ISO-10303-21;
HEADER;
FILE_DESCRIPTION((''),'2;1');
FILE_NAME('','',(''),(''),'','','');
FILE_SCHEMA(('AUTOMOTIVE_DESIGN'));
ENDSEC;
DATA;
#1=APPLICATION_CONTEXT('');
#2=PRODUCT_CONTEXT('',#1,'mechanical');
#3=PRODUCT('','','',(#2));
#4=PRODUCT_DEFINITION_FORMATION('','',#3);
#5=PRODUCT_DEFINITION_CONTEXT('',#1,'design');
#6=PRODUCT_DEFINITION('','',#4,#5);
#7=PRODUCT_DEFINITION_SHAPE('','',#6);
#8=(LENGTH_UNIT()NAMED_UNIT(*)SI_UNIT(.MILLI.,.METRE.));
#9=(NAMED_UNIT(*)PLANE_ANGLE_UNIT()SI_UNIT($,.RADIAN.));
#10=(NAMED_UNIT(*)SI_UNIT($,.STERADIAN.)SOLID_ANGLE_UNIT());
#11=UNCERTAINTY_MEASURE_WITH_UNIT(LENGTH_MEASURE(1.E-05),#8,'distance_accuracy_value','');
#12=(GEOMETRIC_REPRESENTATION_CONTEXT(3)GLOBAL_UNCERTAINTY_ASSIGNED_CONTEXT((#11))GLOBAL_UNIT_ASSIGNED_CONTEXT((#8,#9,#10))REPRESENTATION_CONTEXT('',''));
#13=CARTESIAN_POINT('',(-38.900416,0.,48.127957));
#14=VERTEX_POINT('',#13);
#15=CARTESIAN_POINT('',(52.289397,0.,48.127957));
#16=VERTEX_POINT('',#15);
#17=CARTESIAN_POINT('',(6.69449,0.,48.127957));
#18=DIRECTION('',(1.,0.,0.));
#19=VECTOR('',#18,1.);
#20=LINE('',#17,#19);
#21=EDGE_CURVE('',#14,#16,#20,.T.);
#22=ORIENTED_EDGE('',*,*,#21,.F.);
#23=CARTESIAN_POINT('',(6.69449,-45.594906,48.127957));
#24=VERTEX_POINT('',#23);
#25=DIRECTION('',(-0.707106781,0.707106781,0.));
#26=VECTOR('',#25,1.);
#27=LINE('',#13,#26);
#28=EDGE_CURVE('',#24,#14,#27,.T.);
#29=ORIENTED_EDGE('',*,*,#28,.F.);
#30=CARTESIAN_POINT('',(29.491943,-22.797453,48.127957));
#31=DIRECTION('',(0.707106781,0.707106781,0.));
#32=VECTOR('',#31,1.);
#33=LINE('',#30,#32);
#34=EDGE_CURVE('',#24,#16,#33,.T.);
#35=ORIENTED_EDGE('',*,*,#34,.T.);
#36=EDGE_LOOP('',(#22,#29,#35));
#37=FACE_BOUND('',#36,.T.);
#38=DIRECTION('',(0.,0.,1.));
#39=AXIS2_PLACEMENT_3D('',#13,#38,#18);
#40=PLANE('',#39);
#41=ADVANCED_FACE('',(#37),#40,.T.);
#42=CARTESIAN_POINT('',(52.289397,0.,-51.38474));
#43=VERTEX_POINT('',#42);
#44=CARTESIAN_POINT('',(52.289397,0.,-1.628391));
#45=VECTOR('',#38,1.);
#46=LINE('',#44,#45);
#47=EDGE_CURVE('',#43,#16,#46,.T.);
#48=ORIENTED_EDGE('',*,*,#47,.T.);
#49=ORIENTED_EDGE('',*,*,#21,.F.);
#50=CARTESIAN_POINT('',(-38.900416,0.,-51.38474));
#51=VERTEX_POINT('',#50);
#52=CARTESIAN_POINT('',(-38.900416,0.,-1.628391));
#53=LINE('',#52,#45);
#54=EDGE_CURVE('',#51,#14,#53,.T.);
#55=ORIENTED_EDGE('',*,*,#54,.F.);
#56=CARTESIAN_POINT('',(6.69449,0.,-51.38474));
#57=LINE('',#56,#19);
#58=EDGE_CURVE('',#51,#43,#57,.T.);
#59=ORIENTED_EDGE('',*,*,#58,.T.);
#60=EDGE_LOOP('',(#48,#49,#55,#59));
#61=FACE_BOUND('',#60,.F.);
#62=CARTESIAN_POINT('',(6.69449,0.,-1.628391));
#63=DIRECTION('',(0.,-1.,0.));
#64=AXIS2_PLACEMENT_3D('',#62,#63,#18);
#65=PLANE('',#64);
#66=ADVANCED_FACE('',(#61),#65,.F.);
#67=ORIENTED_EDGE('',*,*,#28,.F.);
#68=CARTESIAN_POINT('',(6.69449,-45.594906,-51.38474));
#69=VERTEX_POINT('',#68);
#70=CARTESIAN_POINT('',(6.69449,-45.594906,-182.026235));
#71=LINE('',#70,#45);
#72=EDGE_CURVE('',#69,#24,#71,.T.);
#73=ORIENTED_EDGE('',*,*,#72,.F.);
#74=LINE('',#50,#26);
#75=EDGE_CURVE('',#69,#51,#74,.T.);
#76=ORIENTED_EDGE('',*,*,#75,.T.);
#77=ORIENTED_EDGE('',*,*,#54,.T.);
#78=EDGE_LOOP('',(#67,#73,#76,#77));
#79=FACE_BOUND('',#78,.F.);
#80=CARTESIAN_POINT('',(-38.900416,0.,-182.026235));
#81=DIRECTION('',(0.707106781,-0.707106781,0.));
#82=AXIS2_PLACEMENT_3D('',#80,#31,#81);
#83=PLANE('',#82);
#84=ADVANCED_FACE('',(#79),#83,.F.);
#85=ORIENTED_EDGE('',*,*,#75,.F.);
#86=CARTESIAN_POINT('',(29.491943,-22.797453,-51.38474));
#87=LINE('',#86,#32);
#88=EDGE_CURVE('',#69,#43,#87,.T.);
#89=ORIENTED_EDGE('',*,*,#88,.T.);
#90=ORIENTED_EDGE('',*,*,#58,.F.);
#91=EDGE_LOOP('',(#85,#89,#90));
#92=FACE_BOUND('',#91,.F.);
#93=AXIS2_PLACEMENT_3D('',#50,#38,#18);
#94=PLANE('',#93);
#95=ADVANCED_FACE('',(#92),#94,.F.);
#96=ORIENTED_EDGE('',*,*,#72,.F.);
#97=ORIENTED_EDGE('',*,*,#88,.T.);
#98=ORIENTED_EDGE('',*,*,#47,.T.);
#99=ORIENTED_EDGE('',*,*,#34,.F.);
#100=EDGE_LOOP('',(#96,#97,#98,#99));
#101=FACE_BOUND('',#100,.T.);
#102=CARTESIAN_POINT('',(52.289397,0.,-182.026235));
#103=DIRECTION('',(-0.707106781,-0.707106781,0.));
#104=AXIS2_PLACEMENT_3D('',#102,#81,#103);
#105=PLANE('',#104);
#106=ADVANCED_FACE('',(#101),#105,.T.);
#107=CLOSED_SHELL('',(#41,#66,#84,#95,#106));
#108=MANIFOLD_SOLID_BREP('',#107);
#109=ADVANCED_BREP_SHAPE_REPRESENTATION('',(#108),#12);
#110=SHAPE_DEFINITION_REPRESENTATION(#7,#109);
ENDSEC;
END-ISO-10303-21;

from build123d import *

# Parameters (mm, degrees)
F0_W        = 91.1898128688
F0_H        = 99.5126962662
F1_DEPTH    = 50.8
F2_T1_DEPTH = 360.7956878435


# Not quite as in the source:
# - a fillet or chamfer that OpenCascade refuses, or shapes differently, is made with other operations: its cross-section is extruded or revolved along the edge and cut away or added


with BuildPart() as f1:
    # F0 (on Front) → F1 (new body)
    with BuildSketch(Plane.XZ):
        with Locations((6.69449009, -1.6283914447)):
            Rectangle(F0_W, F0_H)
    extrude(amount=F1_DEPTH)

    # F2: chamfer of 50.8 on 2 edges, made by hand

    # F2_s2 → F2_t1 (cut)
    with BuildSketch(Plane.XY.offset(-182.0262353664)):
        Polygon((-38.9004163444, 0), (11.8995836556, -50.8), (-38.9004163444, -50.8), align=None)
        Polygon((52.2893965244, 0), (1.4893965244, -50.8), (52.2893965244, -50.8), align=None)
    extrude(amount=F2_T1_DEPTH, mode=Mode.SUBTRACT)


solid = f1.part
